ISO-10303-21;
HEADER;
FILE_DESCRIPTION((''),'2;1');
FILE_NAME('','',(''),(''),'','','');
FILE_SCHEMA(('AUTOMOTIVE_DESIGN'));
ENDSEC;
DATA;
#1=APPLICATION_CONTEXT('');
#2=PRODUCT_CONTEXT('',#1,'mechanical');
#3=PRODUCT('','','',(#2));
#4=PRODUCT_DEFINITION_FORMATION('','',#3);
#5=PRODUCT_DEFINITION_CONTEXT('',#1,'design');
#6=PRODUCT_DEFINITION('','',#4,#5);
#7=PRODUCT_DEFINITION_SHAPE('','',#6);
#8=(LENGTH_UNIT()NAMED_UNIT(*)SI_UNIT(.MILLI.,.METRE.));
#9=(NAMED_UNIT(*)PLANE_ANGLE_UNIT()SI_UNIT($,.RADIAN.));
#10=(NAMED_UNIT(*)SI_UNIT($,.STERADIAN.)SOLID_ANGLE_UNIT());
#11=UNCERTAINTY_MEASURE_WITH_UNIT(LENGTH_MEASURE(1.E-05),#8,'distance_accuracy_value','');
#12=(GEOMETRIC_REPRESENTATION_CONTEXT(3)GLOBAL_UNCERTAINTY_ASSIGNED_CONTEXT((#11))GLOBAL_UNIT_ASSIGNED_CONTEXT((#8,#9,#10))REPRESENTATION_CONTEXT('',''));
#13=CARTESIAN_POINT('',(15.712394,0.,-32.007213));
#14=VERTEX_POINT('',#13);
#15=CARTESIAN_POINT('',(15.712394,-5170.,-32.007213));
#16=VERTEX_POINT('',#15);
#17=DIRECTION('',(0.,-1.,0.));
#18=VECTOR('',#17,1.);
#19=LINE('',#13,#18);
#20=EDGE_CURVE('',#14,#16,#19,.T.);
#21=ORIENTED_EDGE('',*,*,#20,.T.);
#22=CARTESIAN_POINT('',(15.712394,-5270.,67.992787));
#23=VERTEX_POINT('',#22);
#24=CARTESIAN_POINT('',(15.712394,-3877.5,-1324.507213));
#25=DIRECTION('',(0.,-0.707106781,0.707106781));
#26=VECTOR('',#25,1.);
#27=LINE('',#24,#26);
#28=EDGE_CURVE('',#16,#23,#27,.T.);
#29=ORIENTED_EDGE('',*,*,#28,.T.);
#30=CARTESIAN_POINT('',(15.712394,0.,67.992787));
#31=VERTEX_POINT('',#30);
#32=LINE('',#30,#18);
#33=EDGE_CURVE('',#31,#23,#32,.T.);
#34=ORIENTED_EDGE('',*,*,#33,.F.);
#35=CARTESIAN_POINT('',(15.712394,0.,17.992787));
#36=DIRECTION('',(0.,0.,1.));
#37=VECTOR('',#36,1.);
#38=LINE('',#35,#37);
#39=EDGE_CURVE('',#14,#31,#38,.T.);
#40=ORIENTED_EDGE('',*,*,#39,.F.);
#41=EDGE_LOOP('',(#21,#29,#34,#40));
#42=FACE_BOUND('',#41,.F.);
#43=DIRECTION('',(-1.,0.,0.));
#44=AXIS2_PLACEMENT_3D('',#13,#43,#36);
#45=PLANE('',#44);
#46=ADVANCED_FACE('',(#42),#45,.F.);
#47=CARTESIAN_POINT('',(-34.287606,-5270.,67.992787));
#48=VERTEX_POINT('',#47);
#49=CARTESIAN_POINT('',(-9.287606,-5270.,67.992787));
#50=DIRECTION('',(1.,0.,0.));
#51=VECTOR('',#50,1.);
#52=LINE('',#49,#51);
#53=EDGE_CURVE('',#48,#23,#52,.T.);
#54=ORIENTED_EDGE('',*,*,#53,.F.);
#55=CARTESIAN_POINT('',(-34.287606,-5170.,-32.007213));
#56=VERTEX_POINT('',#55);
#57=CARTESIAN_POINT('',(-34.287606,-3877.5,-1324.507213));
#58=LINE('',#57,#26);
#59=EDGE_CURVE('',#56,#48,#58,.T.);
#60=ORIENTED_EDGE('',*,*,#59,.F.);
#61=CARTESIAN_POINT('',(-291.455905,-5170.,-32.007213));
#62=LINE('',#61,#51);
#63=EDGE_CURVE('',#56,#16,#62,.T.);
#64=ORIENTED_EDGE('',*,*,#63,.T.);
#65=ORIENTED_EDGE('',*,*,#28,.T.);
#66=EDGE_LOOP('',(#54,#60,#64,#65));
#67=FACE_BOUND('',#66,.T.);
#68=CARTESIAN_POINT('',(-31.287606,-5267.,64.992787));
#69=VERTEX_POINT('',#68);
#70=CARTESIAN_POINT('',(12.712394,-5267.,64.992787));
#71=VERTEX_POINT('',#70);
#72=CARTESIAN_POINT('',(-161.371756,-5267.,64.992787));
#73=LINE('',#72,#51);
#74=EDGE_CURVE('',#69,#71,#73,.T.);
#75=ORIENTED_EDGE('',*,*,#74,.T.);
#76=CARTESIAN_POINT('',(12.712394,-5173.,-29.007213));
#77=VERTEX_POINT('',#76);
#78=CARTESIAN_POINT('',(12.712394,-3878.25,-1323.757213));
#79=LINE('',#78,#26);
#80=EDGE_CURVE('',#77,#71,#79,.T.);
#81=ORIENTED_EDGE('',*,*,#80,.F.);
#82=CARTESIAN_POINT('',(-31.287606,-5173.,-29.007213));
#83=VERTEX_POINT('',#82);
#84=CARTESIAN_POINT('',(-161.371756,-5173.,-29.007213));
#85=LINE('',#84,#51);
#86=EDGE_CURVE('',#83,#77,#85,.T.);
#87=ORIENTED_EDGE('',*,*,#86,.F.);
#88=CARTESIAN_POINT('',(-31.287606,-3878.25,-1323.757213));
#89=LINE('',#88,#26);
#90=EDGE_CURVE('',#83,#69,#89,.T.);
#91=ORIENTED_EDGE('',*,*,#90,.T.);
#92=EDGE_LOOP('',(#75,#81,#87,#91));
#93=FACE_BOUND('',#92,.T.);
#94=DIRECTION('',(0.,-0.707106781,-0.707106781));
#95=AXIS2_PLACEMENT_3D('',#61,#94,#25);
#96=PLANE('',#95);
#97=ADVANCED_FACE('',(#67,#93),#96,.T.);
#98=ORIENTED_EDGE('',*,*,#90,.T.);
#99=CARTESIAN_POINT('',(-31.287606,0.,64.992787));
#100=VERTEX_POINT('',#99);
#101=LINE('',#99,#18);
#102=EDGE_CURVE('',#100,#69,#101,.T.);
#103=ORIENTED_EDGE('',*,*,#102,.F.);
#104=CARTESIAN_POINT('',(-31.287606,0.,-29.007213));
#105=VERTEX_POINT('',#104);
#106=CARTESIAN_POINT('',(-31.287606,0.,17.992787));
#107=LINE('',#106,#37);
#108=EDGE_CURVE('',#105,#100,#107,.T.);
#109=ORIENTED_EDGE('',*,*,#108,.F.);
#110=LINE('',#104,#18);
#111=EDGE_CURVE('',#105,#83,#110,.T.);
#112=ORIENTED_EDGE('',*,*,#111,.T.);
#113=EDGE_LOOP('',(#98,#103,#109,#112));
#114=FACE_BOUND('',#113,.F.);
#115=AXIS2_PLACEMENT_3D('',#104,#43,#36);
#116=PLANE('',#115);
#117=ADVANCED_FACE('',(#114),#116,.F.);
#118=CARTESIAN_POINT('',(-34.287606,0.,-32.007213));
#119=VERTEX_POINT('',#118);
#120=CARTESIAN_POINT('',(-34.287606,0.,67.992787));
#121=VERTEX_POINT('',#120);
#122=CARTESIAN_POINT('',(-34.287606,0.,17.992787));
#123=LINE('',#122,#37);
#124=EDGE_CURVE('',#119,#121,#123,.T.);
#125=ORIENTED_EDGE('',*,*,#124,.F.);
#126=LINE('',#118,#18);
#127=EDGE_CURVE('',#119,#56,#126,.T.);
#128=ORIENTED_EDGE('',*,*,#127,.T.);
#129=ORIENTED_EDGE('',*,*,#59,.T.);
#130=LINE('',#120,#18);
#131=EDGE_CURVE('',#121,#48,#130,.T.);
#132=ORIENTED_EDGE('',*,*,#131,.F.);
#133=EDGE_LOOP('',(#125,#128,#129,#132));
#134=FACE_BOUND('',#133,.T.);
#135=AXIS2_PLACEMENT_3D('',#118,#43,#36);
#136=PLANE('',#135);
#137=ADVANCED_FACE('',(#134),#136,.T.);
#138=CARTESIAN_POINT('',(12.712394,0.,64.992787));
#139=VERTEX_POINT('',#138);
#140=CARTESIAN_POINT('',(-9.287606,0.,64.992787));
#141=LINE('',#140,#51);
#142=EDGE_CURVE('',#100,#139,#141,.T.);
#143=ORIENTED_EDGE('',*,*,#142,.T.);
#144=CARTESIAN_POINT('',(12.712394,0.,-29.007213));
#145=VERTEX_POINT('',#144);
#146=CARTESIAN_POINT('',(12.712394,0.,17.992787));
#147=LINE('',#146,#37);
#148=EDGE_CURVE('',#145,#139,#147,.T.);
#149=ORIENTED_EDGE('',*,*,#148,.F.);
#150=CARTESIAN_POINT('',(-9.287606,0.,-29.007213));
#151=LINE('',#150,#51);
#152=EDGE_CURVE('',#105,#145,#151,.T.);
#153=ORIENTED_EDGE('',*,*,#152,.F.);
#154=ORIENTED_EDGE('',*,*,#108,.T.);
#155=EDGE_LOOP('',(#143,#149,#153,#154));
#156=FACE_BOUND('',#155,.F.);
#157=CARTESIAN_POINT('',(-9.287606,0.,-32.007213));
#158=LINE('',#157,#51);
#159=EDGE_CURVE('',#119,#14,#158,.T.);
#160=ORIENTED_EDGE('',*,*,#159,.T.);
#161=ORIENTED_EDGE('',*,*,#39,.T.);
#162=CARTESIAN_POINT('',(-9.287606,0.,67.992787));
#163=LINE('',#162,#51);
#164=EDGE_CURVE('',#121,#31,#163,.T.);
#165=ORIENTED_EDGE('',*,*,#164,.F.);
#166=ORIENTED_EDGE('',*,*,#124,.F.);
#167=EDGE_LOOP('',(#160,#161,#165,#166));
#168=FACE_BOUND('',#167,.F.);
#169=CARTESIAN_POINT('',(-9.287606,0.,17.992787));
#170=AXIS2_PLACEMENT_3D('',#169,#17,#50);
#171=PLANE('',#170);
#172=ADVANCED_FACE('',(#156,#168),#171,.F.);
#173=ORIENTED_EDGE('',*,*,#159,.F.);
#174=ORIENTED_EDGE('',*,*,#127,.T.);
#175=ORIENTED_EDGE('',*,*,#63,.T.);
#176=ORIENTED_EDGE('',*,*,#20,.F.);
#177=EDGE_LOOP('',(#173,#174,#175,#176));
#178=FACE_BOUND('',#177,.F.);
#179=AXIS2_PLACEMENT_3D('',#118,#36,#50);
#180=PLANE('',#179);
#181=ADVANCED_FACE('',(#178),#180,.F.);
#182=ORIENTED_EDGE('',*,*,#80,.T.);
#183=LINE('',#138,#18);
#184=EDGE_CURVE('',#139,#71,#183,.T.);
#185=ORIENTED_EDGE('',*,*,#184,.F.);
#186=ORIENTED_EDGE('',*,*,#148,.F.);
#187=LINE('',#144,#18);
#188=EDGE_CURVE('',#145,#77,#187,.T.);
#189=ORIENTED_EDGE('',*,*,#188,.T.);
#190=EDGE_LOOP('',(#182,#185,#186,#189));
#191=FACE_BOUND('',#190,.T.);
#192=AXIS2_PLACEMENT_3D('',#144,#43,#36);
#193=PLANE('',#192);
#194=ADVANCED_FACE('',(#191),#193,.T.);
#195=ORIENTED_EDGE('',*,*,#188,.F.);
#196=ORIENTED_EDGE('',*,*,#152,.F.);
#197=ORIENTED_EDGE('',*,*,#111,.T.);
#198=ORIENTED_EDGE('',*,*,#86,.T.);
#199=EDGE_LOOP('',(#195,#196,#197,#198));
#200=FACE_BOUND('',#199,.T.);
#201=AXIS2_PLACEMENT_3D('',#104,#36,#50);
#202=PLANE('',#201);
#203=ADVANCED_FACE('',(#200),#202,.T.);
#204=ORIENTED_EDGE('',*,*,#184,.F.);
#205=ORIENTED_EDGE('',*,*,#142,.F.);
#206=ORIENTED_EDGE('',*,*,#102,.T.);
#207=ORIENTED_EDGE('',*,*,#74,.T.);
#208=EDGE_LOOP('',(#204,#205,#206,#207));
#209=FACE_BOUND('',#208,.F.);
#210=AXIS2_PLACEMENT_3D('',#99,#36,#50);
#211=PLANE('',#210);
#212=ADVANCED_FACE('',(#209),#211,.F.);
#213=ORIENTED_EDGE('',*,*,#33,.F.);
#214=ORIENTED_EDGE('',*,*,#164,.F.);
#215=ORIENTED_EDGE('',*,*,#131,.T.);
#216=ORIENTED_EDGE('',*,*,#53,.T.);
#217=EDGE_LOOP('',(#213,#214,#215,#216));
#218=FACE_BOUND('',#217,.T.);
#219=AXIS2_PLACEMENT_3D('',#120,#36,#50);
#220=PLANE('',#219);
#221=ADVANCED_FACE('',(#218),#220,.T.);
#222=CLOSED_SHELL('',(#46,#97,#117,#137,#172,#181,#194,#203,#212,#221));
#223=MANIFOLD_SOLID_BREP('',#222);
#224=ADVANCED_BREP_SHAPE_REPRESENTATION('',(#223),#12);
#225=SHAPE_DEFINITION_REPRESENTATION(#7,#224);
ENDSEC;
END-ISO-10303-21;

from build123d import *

# Parameters (mm, degrees)
F0_W        = 50
F0_H        = 100
F0_W_2      = 44
F0_H_2      = 94
F1_DEPTH    = 5270
F2_T1_DEPTH = 564.3365975932


# Not quite as in the source:
# - a fillet or chamfer that OpenCascade refuses, or shapes differently, is made with other operations: its cross-section is extruded or revolved along the edge and cut away or added


with BuildPart() as f1:
    # F0 (on Front) → F1 (new body)
    with BuildSketch(Plane.XZ):
        with Locations((-9.287606366, 17.9927872233)):
            Rectangle(F0_W, F0_H)
        with Locations((-9.287606366, 17.9927872233)):
            Rectangle(F0_W_2, F0_H_2, mode=Mode.SUBTRACT)
    extrude(amount=F1_DEPTH)

    # F2: chamfer of 100 on 1 edges, made by hand

    # F2_s2 → F2_t1 (cut)
    with BuildSketch(Plane.YZ.offset(-291.4559051626)):
        Polygon((-5170, -32.0072127767), (-5270, 67.9927872233), (-5270, -32.0072127767), align=None)
    extrude(amount=F2_T1_DEPTH, mode=Mode.SUBTRACT)


solid = f1.part
